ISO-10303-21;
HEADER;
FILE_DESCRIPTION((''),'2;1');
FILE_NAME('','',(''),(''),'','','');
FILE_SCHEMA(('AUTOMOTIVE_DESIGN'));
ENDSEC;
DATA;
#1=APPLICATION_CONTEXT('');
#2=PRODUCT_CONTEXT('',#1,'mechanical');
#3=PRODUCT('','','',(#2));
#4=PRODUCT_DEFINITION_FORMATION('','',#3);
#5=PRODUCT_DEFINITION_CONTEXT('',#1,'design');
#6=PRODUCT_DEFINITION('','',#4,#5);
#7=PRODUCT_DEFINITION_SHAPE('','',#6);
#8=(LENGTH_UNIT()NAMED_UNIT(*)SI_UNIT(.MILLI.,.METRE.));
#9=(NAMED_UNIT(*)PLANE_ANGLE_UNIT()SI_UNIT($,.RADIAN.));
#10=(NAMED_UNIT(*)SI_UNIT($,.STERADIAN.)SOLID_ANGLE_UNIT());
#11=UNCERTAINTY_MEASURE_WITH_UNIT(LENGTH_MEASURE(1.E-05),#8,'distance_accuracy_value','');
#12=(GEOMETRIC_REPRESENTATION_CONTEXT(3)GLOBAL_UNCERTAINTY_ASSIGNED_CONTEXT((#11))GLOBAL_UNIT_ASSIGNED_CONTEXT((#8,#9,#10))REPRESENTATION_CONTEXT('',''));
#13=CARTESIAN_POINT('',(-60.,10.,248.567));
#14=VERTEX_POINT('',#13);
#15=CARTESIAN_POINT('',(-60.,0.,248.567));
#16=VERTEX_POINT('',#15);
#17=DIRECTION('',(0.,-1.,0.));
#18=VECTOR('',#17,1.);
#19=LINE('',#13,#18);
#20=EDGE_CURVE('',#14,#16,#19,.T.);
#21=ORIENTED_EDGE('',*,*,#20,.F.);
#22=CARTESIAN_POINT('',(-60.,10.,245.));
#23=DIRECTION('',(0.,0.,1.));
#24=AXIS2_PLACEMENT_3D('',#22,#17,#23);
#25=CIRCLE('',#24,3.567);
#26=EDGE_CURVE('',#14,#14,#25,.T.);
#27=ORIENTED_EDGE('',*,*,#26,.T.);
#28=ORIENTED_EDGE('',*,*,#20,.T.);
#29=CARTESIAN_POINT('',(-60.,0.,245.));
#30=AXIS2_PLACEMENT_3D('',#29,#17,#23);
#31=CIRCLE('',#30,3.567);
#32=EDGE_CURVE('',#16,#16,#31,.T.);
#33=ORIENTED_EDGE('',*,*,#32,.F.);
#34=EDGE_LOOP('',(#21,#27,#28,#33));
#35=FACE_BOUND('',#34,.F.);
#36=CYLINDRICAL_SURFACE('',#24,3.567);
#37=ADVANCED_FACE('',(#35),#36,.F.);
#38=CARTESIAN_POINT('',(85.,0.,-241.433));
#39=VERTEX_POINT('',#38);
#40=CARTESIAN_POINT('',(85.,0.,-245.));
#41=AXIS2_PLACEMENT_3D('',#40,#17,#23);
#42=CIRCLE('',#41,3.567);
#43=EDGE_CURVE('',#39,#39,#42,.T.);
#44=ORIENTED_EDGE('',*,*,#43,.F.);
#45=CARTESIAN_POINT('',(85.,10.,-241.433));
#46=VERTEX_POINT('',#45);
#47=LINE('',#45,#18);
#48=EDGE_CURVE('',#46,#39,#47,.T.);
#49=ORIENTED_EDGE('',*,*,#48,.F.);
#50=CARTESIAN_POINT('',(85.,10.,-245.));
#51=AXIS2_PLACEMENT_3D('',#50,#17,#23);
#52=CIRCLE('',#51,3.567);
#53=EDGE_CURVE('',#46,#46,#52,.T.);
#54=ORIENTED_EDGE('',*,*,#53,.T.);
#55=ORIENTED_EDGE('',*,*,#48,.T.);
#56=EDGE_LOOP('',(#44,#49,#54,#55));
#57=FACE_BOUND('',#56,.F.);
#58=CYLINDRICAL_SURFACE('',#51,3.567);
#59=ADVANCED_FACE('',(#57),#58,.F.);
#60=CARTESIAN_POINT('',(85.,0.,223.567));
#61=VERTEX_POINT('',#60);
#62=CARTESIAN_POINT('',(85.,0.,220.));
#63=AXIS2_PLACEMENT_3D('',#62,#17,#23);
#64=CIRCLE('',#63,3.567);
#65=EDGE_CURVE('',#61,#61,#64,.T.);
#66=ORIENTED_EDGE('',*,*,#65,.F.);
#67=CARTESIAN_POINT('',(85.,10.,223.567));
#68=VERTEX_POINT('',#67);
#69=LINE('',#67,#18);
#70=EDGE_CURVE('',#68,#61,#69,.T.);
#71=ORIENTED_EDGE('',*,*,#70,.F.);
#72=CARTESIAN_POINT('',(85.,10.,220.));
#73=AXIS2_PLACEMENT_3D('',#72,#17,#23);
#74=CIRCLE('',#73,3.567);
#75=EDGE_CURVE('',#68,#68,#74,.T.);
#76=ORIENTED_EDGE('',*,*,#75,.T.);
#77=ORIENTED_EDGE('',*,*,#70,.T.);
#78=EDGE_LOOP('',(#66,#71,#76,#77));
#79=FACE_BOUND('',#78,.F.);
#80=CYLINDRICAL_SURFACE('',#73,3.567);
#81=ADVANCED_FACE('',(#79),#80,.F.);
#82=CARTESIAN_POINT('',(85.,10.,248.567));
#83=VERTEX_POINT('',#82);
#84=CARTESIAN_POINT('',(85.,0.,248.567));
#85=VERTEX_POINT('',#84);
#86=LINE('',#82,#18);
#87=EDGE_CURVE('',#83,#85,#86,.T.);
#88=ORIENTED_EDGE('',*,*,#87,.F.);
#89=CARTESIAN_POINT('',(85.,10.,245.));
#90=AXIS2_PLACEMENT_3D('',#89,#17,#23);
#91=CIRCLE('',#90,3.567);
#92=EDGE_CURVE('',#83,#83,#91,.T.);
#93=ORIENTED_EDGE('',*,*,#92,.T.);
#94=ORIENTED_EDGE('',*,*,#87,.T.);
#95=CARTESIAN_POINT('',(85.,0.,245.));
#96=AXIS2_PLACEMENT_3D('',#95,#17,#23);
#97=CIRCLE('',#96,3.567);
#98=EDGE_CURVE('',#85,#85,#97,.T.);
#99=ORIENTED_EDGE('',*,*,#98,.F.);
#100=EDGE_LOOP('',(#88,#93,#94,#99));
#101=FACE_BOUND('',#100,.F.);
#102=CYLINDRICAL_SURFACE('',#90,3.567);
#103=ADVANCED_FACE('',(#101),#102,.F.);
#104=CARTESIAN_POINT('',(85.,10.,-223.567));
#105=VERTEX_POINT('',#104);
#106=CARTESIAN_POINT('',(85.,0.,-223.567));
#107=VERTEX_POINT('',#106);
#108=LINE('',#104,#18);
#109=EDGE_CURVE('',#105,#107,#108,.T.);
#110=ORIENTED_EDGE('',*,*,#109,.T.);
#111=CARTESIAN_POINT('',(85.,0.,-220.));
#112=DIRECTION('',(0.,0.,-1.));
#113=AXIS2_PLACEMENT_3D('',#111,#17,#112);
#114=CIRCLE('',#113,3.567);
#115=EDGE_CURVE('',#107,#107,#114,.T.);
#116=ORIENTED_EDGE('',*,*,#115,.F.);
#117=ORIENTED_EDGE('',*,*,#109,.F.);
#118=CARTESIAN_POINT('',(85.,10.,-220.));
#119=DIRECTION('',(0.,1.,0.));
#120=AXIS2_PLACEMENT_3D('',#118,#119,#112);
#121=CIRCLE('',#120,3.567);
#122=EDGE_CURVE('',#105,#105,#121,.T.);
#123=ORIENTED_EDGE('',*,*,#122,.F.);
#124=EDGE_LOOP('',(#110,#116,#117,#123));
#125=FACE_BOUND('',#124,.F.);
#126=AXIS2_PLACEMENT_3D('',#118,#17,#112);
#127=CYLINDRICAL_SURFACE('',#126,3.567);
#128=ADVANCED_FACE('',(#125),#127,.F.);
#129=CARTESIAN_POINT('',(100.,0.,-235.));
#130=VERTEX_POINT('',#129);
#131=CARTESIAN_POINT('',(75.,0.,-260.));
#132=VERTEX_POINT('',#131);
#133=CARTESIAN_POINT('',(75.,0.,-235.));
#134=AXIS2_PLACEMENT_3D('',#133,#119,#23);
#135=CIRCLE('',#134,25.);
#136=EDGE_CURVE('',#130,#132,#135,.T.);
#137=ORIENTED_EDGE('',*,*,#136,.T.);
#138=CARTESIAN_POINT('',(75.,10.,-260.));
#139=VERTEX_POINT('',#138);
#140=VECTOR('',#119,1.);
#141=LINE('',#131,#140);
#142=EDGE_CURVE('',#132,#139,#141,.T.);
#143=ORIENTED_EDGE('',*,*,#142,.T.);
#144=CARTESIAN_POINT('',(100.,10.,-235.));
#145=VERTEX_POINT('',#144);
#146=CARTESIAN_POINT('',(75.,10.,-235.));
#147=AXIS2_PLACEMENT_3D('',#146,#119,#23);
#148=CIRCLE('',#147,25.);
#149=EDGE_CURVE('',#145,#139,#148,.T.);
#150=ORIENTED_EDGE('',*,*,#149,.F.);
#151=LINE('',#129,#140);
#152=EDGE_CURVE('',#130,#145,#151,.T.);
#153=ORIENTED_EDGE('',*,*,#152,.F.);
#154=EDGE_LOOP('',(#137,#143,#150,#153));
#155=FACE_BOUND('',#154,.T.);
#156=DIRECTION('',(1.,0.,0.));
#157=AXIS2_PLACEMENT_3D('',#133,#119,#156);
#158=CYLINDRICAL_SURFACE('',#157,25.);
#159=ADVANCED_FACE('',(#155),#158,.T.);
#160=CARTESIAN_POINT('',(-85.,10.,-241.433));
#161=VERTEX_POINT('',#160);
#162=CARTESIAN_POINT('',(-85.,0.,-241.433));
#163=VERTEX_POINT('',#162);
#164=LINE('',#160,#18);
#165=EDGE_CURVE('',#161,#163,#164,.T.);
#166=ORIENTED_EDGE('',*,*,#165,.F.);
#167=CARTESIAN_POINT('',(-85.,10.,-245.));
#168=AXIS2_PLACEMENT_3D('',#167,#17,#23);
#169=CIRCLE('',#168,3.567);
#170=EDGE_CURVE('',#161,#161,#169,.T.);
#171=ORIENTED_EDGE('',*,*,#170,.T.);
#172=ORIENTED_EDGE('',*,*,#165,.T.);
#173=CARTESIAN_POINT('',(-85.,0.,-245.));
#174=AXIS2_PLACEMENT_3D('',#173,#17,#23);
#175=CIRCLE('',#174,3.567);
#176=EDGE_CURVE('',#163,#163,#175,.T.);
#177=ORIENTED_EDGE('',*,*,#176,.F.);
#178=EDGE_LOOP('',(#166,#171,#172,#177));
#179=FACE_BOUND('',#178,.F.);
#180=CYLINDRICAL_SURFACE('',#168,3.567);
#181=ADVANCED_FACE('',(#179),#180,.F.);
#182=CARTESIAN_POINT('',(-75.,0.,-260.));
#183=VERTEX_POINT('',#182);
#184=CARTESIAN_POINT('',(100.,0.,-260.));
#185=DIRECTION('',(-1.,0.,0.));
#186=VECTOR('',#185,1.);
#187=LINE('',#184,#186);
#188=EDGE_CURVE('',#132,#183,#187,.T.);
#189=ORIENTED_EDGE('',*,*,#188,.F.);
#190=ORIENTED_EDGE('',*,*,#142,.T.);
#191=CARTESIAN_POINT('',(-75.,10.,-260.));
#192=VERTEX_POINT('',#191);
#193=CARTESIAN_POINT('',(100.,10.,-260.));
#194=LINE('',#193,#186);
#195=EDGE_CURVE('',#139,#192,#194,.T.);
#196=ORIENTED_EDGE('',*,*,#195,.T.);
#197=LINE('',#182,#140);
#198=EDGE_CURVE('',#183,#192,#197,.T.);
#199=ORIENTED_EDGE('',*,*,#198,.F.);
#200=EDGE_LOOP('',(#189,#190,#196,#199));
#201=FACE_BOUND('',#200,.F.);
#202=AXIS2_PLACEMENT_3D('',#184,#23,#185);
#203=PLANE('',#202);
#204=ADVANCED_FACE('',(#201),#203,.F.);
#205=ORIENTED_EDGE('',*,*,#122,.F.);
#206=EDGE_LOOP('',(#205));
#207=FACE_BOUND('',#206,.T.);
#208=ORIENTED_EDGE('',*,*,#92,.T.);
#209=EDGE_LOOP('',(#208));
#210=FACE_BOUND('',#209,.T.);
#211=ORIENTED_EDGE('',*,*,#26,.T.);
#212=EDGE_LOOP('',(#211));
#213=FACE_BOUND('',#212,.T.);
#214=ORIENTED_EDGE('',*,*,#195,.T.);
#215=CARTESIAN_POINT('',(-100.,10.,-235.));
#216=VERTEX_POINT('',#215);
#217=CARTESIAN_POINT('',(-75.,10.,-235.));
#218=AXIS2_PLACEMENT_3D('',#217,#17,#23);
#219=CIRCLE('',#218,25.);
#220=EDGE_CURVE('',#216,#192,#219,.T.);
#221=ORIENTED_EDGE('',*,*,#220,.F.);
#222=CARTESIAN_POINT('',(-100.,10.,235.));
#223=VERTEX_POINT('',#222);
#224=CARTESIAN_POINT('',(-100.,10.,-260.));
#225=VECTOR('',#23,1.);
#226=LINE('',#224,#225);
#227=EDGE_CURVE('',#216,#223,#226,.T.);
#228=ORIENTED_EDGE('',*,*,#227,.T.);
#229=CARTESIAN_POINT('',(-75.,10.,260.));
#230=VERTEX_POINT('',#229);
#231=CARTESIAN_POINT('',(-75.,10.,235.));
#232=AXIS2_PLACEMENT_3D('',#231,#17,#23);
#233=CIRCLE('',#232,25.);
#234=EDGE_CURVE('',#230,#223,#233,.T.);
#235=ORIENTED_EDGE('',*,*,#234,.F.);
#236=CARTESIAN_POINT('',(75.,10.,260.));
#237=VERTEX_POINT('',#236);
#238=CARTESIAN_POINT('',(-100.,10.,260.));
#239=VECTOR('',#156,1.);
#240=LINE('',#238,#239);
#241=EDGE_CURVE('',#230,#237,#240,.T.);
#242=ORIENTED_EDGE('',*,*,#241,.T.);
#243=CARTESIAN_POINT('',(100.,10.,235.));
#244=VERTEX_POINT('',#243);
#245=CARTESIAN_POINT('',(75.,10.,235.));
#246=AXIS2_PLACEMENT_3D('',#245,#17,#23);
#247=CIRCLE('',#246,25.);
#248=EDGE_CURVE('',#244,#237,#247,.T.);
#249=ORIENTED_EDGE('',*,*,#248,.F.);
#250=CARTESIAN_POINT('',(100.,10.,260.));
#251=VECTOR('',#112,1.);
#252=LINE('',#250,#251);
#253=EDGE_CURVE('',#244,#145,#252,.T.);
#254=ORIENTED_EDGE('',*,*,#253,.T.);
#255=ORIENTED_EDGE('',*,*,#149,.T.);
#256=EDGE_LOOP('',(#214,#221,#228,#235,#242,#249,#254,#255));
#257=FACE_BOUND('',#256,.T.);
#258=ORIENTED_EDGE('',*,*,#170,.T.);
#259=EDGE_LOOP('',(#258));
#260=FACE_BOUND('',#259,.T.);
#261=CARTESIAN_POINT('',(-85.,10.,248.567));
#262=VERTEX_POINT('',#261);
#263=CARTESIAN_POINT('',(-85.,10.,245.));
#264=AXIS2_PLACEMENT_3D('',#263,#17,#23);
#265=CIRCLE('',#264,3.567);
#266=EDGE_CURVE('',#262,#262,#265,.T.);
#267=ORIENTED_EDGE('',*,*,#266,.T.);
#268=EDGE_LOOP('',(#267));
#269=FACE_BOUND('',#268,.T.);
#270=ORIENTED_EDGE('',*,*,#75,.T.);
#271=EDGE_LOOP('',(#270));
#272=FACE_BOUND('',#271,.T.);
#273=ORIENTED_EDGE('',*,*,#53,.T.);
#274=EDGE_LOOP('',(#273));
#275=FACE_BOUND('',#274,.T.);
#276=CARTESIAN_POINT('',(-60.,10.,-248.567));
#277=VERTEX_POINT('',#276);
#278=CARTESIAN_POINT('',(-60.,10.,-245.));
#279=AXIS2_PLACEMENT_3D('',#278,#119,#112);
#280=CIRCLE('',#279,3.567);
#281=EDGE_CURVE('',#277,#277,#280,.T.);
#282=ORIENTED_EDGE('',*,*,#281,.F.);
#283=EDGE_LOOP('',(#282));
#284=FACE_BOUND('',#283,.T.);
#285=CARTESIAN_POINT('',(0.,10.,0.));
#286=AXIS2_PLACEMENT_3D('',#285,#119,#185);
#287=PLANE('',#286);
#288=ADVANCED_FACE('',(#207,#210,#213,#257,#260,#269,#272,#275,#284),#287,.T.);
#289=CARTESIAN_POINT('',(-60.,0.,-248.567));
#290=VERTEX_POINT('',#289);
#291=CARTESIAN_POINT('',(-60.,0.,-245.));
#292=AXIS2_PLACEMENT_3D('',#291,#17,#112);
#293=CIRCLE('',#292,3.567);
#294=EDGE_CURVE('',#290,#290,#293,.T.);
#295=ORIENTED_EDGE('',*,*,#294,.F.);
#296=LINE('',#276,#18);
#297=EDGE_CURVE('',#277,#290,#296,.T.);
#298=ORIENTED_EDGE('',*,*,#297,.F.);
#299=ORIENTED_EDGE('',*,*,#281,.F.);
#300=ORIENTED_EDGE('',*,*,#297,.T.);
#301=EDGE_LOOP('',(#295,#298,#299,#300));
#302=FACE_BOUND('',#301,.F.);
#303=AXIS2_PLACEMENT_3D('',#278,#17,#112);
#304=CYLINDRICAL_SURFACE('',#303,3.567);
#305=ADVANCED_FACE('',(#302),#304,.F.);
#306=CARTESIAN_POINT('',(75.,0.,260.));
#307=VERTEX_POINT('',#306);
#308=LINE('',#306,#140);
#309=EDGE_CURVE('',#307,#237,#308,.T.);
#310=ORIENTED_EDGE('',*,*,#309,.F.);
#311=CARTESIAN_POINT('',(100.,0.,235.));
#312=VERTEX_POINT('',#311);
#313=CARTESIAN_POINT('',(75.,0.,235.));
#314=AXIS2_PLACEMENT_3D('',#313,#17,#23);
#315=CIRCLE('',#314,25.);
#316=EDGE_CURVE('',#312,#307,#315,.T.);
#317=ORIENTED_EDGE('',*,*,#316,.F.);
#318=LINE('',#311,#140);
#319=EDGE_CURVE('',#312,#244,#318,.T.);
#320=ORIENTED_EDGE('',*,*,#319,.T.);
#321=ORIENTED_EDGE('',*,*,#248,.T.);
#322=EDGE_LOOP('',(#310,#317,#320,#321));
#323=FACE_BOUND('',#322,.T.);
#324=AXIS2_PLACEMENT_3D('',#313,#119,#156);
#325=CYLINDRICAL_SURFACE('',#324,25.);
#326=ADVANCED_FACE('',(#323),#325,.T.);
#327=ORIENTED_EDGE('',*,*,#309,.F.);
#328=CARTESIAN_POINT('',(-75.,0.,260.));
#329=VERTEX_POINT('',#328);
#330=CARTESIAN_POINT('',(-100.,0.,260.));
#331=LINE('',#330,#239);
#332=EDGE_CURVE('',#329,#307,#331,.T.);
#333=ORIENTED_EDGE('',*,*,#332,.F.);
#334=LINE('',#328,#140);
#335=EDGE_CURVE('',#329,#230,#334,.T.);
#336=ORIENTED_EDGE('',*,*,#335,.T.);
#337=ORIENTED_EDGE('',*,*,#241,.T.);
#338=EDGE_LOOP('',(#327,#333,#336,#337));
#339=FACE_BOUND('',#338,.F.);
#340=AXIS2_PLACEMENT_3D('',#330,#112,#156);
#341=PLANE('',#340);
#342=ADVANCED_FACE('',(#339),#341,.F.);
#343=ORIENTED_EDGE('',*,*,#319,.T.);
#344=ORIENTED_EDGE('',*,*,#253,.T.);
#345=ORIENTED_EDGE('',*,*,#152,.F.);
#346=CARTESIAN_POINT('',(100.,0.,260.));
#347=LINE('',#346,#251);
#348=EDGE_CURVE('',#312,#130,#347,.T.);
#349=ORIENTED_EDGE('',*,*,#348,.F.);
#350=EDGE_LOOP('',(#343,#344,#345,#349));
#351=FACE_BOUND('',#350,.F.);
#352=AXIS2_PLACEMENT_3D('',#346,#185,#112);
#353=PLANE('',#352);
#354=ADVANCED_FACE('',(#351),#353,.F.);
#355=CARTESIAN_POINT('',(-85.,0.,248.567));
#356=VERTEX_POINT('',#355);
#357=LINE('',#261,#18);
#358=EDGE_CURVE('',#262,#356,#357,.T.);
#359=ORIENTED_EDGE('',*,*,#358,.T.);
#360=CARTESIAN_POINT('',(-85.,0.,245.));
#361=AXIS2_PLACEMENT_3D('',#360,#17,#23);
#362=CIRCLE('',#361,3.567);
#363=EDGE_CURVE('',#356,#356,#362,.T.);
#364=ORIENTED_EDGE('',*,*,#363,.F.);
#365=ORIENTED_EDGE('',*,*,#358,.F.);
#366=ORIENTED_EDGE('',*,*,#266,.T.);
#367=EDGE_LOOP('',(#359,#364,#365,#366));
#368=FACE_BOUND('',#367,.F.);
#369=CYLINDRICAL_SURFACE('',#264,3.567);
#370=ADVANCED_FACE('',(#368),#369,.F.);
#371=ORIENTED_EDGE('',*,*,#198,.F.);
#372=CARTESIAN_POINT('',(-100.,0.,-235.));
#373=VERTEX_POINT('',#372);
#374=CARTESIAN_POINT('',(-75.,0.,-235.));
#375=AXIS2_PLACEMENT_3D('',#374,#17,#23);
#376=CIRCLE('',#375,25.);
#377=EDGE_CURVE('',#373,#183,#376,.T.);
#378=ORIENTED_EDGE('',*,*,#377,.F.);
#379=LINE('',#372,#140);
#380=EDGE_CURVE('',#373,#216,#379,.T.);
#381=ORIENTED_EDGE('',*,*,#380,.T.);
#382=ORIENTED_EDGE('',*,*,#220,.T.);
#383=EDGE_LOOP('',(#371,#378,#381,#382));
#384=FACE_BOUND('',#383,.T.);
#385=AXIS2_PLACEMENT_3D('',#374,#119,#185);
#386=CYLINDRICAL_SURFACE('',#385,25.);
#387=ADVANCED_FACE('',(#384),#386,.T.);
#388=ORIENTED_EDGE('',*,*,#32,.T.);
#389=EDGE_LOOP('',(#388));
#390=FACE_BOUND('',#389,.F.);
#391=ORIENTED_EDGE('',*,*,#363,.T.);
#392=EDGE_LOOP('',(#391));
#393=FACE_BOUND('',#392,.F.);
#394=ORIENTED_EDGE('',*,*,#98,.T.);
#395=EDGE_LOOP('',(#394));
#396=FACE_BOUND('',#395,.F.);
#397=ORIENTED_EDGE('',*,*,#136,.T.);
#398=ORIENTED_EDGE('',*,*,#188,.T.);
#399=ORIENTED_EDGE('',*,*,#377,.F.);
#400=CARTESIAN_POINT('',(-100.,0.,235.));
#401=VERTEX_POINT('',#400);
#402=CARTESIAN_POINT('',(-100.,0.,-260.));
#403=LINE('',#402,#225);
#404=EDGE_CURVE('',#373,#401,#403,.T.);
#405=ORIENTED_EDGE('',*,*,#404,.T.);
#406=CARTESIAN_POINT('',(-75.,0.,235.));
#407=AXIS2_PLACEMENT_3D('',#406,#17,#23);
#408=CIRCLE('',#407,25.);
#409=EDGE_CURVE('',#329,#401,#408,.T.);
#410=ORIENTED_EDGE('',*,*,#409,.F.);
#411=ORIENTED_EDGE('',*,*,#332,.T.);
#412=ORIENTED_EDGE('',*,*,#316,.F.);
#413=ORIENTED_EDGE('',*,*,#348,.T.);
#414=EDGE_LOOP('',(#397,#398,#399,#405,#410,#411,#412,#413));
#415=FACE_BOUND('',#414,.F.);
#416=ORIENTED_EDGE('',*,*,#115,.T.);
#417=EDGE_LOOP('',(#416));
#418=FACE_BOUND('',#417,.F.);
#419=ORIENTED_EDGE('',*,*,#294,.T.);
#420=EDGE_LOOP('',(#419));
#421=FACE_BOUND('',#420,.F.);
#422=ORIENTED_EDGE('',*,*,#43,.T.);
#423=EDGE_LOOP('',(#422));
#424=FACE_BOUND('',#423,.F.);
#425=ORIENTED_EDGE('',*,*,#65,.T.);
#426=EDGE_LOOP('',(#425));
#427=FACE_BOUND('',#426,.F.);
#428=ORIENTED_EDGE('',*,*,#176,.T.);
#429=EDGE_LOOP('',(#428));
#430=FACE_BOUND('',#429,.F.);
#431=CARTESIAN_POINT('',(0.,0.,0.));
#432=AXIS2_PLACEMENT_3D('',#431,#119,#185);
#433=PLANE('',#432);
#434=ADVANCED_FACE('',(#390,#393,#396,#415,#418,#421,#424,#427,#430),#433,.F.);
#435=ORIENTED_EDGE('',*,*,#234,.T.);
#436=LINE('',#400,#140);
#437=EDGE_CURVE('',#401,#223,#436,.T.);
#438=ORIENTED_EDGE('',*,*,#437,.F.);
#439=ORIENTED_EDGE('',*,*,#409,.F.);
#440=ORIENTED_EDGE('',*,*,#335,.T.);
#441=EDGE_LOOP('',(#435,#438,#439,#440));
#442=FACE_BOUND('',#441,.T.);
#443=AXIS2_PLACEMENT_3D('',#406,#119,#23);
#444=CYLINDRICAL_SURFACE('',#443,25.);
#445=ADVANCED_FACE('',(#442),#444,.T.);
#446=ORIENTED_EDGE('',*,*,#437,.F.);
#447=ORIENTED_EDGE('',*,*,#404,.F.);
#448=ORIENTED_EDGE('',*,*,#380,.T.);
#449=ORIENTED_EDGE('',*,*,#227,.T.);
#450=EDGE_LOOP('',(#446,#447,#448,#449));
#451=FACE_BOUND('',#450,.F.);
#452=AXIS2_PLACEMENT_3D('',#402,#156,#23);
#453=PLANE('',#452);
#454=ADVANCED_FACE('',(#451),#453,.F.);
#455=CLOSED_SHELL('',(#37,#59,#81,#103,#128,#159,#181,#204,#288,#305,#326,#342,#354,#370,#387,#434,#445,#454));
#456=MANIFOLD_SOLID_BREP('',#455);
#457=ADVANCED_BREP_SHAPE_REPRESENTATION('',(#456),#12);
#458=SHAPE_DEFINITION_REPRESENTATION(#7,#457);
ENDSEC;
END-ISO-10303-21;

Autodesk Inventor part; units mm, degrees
ref_plane "YZ Plane" through (0, 0, 0) normal (1, 0, 0) x (0, 1, 0)
ref_plane "XZ Plane" through (0, 0, 0) normal (0, 1, 0) x (-1, 0, 0)
ref_plane "XY Plane" through (0, 0, 0) normal (0, 0, 1) x (1, 0, 0)
sketch "Sketch1" plane through (0, 0, 0) normal (0, 1, 0) x (-1, 0, 0)
  line L0 (-100, -260) -> (100, -260)
  line L1 (100, -260) -> (100, 260)
  line L2 (100, 260) -> (-100, 260)
  line L3 (-100, 260) -> (-100, -260)
  line L4 (-100, -260) -> (100, 260) construction
  line L5 (100, -260) -> (-100, 260) construction
  point P0 (0, 0)
  dimension "d0" = 200
  dimension "d1" = 520
extrude "Extrusion1" add sketch "Sketch1" along normal blind 10
fillet "Fillet1" radius 25 4 edges at (-100, 5, -260) (-100, 5, 260) (100, 5, 260) (100, 5, -260)
sketch "Sketch2" plane through (0, 10, 0) normal (0, 1, 0) x (1, 0, 0)
  line L0 (100, -235) -> (100, 235) projected
  line L1 (-75, -260) -> (75, -260) projected
  point P0 (0, 0)
  point P1 (85, -245)
  dimension "d5" = 15
  dimension "d6" = 15
hole "Hole1" at (85, 10, 245) direction (0, -1, 0) diameter 7.134 end through all thread size "M8x0.8" class "6H" standard "ISO Metric profile"
pattern_linear "Rectangular Pattern1" count 2 spacing 170 along (-1, 0, 0) count 2 spacing 490 along (0, 0, -1) of "Hole1"
sketch "Sketch7" plane through (0, 10, 0) normal (0, 1, 0) x (1, 0, 0)
  circle A0 centre (85, -245) radius 3.567 projected
  line L0 (100, -235) -> (100, 235) projected
  circle A1 centre (-85, -245) radius 3.567 projected
  line L1 (-75, -260) -> (75, -260) projected
  point P0 (0, 0)
  point P1 (85, -220)
  point P2 (-60, -245)
  dimension "d61" = 25
  dimension "d62" = 15
  dimension "d63" = 25
  dimension "d64" = 15
hole "Hole6" at (85, 10, 220) at (-60, 10, 245) direction (0, -1, 0) diameter 7.134 end through all thread size "M8x0.8" class "6H" standard "ISO Metric profile"
mirror "Mirror2" about plane through (0, 0, 0) normal (0, 0, 1) of "Hole6"
properties part number "Mid_plate" material "Stainless Steel"
